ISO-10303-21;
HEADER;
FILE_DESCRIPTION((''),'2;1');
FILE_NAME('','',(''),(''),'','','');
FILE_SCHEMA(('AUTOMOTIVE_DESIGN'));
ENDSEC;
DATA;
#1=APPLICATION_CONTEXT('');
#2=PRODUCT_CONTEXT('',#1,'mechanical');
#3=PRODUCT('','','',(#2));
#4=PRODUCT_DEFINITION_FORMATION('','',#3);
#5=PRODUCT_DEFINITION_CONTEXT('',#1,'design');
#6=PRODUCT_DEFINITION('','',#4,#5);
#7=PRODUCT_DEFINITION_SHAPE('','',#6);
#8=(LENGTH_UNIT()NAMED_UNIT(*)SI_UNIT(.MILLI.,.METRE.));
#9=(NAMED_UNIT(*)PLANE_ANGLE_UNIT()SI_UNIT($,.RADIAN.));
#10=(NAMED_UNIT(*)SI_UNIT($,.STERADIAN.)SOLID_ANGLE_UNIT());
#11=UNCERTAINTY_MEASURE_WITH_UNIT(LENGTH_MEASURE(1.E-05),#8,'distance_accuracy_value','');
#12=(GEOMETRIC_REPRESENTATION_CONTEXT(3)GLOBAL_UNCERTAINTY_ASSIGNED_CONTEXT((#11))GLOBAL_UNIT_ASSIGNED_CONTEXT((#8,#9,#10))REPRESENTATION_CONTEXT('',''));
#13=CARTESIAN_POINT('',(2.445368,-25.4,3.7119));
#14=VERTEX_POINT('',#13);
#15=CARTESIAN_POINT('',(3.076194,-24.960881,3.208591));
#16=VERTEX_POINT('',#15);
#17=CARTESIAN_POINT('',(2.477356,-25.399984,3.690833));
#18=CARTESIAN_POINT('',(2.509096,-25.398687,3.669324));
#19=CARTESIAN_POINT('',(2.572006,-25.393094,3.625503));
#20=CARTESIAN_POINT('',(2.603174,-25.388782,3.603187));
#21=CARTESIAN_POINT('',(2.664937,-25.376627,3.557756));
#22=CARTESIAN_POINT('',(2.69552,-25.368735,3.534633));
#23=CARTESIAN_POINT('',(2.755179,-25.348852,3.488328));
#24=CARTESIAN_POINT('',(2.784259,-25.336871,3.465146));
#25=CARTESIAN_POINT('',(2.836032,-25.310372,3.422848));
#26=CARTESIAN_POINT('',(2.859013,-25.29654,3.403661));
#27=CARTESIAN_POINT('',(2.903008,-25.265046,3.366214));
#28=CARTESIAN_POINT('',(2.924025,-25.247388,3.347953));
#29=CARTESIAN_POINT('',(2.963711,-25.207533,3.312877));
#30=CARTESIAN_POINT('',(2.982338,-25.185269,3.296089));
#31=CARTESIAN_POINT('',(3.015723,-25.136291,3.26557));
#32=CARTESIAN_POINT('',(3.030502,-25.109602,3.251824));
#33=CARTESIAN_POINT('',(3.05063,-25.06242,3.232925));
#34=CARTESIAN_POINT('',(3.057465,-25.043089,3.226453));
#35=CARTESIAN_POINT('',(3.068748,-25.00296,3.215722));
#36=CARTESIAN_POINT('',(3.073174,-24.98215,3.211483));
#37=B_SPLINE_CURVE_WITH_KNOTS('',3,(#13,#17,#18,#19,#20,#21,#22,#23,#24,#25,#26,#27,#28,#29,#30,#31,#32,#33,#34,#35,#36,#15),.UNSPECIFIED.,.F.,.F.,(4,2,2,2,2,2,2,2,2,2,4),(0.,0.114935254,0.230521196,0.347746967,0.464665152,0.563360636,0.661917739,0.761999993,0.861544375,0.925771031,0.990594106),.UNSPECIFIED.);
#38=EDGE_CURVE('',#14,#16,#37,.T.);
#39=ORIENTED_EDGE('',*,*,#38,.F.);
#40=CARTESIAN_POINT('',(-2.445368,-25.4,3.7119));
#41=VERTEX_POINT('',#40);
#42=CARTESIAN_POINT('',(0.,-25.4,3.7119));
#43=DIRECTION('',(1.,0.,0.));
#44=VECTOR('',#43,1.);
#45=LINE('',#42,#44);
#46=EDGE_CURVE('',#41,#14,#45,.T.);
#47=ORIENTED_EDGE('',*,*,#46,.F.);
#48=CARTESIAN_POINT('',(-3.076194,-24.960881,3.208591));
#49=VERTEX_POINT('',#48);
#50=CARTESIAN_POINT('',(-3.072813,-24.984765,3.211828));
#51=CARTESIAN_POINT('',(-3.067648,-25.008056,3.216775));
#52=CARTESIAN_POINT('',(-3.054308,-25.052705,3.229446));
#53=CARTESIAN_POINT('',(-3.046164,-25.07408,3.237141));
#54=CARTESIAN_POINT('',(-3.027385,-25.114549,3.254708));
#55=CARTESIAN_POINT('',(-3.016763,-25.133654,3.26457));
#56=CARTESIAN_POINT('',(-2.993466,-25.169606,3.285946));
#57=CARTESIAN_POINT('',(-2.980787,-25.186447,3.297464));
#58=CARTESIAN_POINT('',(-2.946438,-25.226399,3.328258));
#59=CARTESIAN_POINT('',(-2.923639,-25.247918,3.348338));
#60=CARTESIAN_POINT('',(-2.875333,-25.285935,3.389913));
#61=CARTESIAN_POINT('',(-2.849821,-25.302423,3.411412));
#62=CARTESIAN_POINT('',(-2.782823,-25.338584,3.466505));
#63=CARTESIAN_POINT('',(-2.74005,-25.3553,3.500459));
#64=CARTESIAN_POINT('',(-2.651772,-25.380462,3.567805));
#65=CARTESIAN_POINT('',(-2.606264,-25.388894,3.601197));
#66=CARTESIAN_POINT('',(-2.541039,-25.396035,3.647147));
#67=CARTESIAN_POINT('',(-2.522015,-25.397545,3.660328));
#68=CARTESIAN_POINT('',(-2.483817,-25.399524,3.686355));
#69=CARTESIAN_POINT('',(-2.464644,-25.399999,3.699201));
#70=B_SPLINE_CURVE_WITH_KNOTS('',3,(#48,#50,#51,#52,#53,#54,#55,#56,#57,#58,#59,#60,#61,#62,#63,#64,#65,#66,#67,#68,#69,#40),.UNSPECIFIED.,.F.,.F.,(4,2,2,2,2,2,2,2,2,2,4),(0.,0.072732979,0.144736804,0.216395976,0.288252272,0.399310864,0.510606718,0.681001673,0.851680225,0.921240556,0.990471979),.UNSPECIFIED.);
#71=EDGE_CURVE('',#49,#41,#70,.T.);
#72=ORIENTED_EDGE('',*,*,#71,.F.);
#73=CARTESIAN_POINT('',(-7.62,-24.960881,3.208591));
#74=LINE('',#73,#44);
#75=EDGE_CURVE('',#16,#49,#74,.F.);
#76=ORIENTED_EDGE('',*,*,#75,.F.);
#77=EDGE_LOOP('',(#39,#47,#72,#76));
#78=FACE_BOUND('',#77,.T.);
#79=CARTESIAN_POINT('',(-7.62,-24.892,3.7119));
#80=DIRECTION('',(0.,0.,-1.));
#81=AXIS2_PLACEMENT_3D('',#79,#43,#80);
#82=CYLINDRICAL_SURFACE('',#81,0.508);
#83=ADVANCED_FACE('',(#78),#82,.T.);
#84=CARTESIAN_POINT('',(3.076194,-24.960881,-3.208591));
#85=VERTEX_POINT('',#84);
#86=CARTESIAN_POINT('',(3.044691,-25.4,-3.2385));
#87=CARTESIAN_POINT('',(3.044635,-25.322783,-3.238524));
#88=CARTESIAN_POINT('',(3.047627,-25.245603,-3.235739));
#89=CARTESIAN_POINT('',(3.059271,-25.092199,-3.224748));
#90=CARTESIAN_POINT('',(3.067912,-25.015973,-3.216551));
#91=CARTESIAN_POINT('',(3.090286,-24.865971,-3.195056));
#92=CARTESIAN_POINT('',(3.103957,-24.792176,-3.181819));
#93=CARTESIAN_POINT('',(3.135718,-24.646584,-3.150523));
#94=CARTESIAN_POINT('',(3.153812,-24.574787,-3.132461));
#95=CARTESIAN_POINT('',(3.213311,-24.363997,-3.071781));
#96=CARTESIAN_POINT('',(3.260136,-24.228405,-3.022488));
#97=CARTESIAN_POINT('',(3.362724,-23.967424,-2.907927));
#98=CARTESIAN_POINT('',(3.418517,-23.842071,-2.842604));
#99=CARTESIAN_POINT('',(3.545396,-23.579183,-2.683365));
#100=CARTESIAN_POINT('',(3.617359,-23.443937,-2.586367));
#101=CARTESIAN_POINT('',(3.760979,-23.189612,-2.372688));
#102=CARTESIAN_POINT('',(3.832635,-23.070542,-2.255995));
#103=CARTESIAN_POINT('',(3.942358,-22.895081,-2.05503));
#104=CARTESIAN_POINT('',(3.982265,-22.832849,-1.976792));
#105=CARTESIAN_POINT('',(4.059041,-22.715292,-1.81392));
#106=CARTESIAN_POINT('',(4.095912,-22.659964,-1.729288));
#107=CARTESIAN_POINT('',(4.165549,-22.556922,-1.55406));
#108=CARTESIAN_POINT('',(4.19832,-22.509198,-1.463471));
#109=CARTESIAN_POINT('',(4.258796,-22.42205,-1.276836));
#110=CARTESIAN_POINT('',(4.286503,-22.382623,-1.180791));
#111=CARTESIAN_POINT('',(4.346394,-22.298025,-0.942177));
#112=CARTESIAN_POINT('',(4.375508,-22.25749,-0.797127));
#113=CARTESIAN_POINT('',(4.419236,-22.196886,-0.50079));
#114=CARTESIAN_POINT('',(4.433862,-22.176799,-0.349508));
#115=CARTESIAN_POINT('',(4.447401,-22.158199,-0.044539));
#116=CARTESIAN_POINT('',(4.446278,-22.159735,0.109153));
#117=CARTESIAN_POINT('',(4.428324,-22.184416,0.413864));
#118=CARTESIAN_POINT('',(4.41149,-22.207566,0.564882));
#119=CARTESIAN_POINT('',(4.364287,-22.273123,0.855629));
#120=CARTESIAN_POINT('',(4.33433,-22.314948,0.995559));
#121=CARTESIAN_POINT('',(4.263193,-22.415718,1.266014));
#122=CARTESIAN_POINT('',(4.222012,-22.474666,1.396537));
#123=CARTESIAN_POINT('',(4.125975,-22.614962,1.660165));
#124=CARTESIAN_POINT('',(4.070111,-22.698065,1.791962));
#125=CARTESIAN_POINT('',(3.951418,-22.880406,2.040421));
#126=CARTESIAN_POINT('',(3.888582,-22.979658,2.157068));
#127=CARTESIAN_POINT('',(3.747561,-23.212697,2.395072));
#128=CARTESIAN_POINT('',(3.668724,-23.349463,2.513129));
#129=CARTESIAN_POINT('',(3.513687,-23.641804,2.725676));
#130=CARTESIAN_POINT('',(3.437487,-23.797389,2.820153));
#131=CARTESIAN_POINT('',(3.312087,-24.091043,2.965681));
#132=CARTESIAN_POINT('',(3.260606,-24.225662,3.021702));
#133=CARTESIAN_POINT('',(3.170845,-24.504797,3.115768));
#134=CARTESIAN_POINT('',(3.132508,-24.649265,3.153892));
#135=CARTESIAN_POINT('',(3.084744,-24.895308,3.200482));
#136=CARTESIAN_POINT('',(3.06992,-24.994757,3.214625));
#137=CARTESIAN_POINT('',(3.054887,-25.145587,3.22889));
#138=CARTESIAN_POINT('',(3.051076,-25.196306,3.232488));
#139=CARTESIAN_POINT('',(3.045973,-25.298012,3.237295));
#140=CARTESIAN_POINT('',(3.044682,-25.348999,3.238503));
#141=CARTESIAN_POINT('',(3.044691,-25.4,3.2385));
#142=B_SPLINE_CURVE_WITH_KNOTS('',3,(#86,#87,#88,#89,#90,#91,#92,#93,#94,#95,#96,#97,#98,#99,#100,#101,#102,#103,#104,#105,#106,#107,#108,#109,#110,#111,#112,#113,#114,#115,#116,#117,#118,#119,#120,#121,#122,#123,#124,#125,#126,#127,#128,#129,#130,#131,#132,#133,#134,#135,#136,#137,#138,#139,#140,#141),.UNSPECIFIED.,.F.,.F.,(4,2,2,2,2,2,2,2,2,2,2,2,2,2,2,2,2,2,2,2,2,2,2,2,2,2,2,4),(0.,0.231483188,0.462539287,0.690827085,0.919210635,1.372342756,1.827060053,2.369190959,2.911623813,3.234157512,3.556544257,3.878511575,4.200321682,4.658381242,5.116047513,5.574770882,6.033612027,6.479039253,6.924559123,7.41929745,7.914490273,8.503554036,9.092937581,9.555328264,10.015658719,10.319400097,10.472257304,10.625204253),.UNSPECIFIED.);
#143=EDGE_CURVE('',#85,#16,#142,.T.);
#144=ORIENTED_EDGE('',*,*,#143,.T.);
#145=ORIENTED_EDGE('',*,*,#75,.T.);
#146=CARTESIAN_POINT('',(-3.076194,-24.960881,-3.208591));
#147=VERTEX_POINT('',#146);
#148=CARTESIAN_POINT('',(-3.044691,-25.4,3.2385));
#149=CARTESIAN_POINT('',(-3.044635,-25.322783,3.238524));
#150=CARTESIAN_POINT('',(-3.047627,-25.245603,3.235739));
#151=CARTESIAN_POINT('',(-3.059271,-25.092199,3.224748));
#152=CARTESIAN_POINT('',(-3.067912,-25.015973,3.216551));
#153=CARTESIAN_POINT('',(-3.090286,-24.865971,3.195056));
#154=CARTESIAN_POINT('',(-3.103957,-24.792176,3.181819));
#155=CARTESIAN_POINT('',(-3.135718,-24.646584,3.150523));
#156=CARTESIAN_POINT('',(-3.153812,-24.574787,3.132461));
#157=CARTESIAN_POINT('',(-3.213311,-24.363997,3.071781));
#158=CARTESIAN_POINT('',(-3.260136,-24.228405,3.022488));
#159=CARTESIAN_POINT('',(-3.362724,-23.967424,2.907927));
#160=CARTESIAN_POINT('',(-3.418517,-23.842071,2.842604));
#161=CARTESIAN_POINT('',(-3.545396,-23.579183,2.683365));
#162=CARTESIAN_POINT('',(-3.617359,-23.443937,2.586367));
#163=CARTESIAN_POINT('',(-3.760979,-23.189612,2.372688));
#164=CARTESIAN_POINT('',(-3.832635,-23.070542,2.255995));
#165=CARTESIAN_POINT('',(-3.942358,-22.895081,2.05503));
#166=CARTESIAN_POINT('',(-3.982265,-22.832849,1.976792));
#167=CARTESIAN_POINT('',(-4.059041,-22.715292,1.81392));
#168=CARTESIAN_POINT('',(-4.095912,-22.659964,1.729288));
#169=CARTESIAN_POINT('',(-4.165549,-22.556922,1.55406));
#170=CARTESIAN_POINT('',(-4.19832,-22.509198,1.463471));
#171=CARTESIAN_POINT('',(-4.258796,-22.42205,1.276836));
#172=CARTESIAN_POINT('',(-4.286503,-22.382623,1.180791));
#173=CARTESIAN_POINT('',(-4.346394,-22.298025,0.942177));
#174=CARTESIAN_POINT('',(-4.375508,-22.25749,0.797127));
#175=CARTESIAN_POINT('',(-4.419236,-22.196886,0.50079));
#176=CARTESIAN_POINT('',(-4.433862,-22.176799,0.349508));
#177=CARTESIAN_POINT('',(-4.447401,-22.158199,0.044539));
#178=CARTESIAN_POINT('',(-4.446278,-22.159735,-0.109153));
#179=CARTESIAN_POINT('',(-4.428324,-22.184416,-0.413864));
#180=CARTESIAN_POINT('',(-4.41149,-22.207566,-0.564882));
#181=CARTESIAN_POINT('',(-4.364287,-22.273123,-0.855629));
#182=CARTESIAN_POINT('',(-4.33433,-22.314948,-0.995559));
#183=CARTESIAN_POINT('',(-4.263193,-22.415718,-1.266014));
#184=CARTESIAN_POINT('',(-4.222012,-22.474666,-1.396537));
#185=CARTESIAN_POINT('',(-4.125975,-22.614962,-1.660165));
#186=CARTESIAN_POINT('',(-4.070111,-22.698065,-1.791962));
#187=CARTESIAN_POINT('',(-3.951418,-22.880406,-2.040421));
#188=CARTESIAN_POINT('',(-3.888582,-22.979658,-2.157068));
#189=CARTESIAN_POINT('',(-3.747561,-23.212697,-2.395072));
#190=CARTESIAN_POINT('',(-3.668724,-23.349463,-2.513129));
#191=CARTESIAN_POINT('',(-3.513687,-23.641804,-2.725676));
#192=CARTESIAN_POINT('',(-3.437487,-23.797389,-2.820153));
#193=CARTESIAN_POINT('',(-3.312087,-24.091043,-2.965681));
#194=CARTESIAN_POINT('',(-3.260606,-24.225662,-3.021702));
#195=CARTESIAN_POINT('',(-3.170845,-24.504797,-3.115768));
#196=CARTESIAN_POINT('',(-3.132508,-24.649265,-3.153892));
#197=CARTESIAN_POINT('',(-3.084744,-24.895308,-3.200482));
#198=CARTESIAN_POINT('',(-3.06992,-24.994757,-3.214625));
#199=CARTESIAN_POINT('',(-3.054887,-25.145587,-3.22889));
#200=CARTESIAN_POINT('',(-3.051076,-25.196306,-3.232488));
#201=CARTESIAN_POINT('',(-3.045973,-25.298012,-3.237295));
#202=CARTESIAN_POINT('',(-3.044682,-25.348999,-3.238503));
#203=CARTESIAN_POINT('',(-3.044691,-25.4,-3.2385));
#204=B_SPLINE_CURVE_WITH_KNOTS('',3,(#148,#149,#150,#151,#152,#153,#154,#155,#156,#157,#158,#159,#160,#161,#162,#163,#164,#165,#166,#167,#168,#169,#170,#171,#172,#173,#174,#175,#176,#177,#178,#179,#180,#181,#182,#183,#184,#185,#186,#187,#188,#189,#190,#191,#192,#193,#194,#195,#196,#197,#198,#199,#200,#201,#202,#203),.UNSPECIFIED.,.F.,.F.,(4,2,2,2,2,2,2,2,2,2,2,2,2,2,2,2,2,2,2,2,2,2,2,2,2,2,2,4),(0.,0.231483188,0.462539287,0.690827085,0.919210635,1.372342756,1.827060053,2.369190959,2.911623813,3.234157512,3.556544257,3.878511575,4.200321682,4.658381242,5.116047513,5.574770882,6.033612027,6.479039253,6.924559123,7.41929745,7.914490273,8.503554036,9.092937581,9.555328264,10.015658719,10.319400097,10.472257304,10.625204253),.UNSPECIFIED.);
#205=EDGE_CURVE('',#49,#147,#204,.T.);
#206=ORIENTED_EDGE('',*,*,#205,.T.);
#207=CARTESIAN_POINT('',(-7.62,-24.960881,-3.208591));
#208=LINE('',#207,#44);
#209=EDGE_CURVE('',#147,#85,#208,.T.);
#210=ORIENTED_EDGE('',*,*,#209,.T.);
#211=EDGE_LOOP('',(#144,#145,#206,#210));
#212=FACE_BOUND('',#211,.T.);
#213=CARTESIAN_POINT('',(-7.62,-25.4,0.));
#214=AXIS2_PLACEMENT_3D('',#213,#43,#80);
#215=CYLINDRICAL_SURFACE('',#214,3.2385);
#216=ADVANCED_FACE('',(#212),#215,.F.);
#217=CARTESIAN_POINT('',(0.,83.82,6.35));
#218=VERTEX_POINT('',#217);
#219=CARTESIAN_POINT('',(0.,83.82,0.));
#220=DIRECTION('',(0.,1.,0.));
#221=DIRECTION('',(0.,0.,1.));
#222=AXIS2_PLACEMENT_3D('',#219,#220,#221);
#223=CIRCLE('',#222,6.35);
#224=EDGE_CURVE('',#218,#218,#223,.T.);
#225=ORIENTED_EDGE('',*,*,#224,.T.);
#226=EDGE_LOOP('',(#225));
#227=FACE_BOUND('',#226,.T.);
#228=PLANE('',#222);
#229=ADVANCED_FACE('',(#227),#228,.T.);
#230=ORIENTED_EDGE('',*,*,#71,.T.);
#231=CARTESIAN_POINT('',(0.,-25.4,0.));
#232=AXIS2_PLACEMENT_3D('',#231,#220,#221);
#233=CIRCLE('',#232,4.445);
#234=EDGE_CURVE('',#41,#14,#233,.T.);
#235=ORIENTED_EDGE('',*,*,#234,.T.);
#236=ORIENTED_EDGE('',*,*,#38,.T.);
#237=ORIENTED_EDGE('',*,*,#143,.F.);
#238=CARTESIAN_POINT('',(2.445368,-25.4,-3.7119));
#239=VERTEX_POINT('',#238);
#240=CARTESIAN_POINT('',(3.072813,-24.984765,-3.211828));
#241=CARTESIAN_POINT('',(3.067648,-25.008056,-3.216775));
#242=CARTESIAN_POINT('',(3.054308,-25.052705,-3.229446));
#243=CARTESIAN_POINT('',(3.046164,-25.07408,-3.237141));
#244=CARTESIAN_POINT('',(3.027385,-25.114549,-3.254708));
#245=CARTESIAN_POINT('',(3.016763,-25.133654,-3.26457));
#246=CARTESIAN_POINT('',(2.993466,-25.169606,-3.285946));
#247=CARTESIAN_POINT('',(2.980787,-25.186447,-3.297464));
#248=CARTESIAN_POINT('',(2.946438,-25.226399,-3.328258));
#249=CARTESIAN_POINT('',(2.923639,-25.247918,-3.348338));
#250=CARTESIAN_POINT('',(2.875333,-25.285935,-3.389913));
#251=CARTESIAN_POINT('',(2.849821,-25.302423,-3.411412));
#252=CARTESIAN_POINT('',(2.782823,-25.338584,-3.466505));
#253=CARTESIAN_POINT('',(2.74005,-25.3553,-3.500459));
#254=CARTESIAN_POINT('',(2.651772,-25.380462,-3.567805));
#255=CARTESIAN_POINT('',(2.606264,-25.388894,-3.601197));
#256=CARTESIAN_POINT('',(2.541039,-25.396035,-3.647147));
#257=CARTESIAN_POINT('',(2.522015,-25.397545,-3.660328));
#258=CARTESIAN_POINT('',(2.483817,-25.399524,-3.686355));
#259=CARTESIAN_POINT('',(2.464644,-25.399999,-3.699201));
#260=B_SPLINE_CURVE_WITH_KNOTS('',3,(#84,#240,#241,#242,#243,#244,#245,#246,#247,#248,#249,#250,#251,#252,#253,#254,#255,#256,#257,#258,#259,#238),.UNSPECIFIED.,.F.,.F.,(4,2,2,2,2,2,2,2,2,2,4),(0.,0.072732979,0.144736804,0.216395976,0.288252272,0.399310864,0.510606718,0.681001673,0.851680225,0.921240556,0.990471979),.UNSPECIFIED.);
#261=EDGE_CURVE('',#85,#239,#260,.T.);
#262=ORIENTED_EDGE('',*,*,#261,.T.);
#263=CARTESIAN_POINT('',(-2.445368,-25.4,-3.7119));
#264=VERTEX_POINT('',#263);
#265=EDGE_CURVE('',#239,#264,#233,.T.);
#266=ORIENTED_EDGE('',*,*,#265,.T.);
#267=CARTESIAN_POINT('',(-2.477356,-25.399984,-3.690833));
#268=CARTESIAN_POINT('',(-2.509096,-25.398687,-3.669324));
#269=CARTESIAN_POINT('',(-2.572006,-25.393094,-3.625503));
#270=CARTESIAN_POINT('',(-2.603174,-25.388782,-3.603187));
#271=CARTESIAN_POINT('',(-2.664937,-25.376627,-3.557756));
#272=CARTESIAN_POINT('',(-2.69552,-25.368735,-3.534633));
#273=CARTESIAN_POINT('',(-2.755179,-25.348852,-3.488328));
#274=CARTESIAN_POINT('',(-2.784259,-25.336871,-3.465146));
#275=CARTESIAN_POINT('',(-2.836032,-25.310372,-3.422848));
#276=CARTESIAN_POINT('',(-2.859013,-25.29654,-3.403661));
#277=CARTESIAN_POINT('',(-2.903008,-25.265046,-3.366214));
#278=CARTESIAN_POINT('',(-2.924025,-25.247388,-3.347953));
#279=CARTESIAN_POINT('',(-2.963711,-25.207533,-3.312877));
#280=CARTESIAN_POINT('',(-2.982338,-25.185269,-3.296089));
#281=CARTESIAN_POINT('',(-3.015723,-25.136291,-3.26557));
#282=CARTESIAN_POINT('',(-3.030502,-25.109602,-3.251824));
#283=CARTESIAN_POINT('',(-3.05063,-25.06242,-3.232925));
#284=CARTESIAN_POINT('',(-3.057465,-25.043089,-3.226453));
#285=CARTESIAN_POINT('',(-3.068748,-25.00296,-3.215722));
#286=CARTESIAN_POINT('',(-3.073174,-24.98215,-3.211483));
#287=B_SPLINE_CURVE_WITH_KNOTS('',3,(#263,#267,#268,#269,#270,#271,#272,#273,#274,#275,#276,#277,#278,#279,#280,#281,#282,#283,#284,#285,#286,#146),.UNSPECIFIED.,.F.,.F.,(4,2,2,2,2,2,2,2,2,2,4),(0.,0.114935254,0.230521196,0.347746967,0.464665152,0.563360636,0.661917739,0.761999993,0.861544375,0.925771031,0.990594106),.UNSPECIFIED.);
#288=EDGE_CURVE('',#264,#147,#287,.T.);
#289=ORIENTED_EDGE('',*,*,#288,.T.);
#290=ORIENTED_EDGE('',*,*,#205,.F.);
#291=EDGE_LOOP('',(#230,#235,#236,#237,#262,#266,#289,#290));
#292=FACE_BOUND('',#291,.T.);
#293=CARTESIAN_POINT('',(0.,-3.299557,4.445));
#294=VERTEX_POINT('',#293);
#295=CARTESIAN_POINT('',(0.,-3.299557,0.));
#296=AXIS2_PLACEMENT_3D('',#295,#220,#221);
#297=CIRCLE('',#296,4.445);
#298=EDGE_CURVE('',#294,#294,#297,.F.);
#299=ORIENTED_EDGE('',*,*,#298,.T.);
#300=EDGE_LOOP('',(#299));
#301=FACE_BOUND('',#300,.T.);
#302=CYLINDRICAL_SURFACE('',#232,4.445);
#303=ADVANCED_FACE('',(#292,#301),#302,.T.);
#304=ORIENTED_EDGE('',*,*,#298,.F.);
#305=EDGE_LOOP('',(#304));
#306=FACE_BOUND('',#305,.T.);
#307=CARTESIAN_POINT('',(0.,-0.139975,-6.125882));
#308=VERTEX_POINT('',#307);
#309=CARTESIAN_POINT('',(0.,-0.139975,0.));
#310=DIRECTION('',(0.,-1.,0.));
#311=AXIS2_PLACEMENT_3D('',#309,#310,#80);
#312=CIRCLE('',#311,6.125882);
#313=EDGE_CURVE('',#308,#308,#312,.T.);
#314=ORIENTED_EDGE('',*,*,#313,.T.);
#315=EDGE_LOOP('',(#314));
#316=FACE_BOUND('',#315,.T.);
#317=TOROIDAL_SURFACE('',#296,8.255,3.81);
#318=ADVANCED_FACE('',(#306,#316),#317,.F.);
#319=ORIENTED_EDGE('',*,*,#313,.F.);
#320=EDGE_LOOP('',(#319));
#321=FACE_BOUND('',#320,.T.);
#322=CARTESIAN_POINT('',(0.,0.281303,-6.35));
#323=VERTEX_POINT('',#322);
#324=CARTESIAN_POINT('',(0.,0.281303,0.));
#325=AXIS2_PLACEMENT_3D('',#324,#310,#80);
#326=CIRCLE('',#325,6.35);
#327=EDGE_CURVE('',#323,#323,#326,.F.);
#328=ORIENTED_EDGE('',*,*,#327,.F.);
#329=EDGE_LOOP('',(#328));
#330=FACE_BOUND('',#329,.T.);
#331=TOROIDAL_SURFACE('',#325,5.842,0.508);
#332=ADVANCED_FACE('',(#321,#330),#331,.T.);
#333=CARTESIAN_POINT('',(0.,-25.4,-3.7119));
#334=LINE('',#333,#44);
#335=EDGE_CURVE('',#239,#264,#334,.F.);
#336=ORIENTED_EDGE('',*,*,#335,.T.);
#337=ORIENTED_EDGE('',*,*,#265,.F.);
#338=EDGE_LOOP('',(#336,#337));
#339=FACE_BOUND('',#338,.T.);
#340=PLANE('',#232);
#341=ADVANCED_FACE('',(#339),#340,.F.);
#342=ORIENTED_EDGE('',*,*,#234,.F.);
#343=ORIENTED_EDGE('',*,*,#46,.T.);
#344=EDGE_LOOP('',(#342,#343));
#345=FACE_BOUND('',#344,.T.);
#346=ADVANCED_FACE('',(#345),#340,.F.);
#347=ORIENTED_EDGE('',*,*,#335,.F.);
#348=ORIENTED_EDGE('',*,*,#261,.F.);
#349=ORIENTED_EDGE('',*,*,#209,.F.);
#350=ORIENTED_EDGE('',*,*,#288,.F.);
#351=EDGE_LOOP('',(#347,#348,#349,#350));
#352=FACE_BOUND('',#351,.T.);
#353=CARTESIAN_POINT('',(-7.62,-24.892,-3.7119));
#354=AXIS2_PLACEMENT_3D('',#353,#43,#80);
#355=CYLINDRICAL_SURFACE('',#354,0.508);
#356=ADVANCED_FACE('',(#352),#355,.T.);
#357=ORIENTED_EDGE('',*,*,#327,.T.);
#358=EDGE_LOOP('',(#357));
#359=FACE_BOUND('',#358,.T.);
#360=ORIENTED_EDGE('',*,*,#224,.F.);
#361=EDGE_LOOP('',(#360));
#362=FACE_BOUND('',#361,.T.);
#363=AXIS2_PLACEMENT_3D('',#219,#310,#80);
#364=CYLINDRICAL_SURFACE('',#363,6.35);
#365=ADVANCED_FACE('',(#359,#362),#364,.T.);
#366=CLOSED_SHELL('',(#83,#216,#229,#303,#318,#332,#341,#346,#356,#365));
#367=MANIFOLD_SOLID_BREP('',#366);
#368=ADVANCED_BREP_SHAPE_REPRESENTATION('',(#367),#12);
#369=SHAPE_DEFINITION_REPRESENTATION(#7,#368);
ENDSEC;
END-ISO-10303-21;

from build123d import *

# Parameters (mm, degrees)
SKETCH1_R               = 6.35
BOSS_EXTRUDE1_DEPTH     = 83.82
SKETCH3_R               = 4.445
BOSS_EXTRUDE2_DEPTH     = 25.4
FILLET1_R               = 3.81
CUT_EXTRUDE1_DEPTH      = 7.62
CUT_EXTRUDE1_DEPTH_BACK = 7.62
SKETCH4_R               = 3.2385
FILLET2_R               = 0.508


with BuildPart() as part:
    # Sketch1 → Boss-Extrude1 (new body)
    with BuildSketch(Plane(origin=(0, 0, 0), x_dir=(1, 0, 0), z_dir=(0, 1, 0))):
        with Locations(Location((0, 0, 0), (0, 0, 270))):
            Circle(SKETCH1_R)
    extrude(amount=BOSS_EXTRUDE1_DEPTH)

    # Sketch3 → Boss-Extrude2 (add)
    with BuildSketch(Plane(origin=(0, 0, 0), x_dir=(1, 0, 0), z_dir=(0, 1, 0))):
        with Locations(Location((0, 0, 0), (0, 0, 270))):
            Circle(SKETCH3_R)
    extrude(amount=-BOSS_EXTRUDE2_DEPTH)

    # Fillet1
    # the kernel refuses this fillet: 3.81 mm, written as the material it adds along each edge
    with BuildSketch(Plane(origin=(0, 0, 0), x_dir=(0, 0, 1), z_dir=(-1, 0, 0))) as fillet1_piece_1:
        with BuildLine():
            CenterArc((8.255, -3.299556788), FILLET1_R, 120, 60)
            Line((4.445, -3.299556788), (4.3688, -3.299556788))
            Line((4.3688, -3.299556788), (4.3688, 0))
            Line((4.3688, 0), (4.445, 0.0762))
            ThreePointArc((4.445, 0.0762), (5.3975, 0.0762), (6.3119, 0.065991136))
            Line((6.3119, 0.065991136), (6.35, 0))
        make_face()
    revolve(axis=Axis((0, 0, 0), (0, 1, 0)))

    # Sketch4 → Cut-Extrude1 (cut, two sides: drawn at the far end of the back side and taken through both)
    with BuildSketch(Plane(origin=(0, 0, 0), x_dir=(0, 0, -1), z_dir=(1, 0, 0)).offset(-CUT_EXTRUDE1_DEPTH_BACK)):
        with Locations((0, -25.4)):
            Circle(SKETCH4_R)
    extrude(amount=CUT_EXTRUDE1_DEPTH + CUT_EXTRUDE1_DEPTH_BACK, mode=Mode.SUBTRACT)

    # Fillet2
    fillet2_edges = [part.edges().sort_by_distance(p)[0] for p in [
        (0, -25.4, -3.2385),
        (0, -25.4, 3.2385),
        (0, 0, -6.35),
    ]]
    fillet(fillet2_edges, radius=FILLET2_R)


solid = part.part
